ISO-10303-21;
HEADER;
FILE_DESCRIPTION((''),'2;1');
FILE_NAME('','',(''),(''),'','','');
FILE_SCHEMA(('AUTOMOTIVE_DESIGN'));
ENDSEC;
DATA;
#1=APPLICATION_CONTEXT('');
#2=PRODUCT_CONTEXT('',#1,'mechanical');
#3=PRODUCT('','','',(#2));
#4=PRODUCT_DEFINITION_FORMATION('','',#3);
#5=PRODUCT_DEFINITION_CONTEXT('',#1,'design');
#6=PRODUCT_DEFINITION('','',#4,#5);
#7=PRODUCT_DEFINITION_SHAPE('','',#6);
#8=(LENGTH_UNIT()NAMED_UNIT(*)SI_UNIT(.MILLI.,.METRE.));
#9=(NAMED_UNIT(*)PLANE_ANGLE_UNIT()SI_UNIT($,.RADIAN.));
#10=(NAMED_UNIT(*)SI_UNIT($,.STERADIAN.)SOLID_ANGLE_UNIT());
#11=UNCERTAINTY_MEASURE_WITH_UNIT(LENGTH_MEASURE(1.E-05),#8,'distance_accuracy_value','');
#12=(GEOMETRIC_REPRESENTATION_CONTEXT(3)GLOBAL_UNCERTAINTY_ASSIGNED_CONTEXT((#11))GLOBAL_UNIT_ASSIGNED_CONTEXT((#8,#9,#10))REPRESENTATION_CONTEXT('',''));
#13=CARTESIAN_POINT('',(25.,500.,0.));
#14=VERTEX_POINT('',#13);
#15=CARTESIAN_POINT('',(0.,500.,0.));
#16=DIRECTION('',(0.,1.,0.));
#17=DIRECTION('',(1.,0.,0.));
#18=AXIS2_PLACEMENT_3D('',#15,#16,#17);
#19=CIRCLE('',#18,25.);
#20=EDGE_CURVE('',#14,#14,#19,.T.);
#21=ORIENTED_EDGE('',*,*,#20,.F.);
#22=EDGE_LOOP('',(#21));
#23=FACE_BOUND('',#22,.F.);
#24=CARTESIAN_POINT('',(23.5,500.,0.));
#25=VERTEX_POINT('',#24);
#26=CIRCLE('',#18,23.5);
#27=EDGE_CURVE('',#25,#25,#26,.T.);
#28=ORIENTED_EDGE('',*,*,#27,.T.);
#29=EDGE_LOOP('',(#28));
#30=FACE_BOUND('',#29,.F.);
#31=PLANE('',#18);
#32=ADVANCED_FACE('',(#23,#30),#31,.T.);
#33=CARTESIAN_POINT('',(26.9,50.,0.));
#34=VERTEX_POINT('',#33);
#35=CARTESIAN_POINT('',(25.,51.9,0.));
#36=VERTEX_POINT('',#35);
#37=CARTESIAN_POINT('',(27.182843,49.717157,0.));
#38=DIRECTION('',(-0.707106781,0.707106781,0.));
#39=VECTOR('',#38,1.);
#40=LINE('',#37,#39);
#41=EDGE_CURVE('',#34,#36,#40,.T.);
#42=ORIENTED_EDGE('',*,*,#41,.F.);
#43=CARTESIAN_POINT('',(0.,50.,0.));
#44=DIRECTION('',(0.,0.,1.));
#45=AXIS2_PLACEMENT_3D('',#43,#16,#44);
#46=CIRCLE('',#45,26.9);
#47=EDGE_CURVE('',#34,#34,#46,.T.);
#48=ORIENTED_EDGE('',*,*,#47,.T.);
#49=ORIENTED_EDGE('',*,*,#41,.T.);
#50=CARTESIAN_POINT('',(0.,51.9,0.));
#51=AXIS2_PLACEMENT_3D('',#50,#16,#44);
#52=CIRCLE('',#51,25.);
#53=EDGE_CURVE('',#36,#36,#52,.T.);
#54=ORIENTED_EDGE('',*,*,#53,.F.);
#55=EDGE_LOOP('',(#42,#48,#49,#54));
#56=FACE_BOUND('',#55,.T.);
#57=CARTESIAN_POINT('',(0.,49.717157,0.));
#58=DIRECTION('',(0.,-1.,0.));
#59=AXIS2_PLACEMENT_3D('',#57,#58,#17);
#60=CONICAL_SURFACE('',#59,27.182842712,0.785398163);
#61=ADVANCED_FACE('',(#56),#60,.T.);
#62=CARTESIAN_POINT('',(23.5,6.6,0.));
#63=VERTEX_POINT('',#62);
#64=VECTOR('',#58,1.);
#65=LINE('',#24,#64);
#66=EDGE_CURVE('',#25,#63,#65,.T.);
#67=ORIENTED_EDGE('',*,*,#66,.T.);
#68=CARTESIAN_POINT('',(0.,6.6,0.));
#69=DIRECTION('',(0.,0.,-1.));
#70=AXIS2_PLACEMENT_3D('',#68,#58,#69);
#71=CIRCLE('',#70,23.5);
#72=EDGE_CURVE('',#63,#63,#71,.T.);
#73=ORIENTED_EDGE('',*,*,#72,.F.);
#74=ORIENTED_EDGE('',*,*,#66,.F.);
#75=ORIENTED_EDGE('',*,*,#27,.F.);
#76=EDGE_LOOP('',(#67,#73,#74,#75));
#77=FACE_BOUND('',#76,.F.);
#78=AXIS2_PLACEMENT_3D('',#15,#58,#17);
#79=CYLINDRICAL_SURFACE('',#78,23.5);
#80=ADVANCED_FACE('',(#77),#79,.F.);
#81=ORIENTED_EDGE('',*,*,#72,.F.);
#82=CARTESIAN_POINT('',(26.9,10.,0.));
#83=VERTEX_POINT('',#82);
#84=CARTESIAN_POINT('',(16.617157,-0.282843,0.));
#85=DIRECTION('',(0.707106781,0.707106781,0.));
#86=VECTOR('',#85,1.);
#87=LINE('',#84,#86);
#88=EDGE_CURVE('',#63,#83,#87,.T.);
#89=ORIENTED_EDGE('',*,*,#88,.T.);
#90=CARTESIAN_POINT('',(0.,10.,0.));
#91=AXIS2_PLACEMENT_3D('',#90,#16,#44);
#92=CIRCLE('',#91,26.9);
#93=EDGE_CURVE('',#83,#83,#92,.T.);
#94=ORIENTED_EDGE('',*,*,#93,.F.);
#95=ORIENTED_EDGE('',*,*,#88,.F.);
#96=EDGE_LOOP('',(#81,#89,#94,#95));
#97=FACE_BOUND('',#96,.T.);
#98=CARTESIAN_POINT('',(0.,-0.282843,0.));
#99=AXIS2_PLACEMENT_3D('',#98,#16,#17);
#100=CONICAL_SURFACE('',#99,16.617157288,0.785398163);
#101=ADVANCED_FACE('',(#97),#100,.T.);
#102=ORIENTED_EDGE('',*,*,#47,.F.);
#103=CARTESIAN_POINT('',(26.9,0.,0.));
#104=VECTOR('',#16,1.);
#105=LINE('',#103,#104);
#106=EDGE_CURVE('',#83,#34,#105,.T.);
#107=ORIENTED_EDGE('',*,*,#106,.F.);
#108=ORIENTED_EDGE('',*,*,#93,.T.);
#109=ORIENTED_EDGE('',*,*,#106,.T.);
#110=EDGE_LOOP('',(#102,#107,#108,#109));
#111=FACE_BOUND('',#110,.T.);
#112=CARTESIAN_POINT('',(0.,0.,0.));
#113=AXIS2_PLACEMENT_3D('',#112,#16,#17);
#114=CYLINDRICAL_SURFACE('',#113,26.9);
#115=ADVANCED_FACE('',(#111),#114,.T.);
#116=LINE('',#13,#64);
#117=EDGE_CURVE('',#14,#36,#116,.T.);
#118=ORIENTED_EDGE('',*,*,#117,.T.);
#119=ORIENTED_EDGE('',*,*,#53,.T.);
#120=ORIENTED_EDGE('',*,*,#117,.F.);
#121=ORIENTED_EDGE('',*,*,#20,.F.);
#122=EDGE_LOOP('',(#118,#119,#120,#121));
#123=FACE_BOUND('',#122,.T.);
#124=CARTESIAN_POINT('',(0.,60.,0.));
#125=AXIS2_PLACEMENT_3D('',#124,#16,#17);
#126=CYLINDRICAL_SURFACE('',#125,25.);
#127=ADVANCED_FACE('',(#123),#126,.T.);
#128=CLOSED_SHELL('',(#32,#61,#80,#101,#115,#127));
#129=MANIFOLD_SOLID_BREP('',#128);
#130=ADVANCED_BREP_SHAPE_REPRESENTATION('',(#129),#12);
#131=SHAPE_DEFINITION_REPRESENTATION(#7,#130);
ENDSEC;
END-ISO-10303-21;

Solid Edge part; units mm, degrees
sketch "Sketch1" plane through (0, 0, 0) normal (0, 0, 1) x (1, 0, 0)
  line L0 (25, 60) -> (25, 500)
  line L1 (23.5, 500) -> (25, 500)
  line L2 (23.5, 500) -> (23.5, 0)
  line L3 (23.5, 0) -> (26.9, 0)
  line L4 (26.9, 0) -> (26.9, 60)
  line L5 (26.9, 60) -> (25, 60)
revolve "RevolvedProtrusion1" add sketch "Sketch1" angle 360 about axis through (0, 0, 0) along (0, 1, 0)
chamfer "Chamfer_2" distance 10 angle 45 2 edges at (0, 60, -26.9) (0, 0, -26.9)
cosmetic_thread "Thread_2" size "M52" thread depth 10
properties material "Aluminium, 6061-T6"
